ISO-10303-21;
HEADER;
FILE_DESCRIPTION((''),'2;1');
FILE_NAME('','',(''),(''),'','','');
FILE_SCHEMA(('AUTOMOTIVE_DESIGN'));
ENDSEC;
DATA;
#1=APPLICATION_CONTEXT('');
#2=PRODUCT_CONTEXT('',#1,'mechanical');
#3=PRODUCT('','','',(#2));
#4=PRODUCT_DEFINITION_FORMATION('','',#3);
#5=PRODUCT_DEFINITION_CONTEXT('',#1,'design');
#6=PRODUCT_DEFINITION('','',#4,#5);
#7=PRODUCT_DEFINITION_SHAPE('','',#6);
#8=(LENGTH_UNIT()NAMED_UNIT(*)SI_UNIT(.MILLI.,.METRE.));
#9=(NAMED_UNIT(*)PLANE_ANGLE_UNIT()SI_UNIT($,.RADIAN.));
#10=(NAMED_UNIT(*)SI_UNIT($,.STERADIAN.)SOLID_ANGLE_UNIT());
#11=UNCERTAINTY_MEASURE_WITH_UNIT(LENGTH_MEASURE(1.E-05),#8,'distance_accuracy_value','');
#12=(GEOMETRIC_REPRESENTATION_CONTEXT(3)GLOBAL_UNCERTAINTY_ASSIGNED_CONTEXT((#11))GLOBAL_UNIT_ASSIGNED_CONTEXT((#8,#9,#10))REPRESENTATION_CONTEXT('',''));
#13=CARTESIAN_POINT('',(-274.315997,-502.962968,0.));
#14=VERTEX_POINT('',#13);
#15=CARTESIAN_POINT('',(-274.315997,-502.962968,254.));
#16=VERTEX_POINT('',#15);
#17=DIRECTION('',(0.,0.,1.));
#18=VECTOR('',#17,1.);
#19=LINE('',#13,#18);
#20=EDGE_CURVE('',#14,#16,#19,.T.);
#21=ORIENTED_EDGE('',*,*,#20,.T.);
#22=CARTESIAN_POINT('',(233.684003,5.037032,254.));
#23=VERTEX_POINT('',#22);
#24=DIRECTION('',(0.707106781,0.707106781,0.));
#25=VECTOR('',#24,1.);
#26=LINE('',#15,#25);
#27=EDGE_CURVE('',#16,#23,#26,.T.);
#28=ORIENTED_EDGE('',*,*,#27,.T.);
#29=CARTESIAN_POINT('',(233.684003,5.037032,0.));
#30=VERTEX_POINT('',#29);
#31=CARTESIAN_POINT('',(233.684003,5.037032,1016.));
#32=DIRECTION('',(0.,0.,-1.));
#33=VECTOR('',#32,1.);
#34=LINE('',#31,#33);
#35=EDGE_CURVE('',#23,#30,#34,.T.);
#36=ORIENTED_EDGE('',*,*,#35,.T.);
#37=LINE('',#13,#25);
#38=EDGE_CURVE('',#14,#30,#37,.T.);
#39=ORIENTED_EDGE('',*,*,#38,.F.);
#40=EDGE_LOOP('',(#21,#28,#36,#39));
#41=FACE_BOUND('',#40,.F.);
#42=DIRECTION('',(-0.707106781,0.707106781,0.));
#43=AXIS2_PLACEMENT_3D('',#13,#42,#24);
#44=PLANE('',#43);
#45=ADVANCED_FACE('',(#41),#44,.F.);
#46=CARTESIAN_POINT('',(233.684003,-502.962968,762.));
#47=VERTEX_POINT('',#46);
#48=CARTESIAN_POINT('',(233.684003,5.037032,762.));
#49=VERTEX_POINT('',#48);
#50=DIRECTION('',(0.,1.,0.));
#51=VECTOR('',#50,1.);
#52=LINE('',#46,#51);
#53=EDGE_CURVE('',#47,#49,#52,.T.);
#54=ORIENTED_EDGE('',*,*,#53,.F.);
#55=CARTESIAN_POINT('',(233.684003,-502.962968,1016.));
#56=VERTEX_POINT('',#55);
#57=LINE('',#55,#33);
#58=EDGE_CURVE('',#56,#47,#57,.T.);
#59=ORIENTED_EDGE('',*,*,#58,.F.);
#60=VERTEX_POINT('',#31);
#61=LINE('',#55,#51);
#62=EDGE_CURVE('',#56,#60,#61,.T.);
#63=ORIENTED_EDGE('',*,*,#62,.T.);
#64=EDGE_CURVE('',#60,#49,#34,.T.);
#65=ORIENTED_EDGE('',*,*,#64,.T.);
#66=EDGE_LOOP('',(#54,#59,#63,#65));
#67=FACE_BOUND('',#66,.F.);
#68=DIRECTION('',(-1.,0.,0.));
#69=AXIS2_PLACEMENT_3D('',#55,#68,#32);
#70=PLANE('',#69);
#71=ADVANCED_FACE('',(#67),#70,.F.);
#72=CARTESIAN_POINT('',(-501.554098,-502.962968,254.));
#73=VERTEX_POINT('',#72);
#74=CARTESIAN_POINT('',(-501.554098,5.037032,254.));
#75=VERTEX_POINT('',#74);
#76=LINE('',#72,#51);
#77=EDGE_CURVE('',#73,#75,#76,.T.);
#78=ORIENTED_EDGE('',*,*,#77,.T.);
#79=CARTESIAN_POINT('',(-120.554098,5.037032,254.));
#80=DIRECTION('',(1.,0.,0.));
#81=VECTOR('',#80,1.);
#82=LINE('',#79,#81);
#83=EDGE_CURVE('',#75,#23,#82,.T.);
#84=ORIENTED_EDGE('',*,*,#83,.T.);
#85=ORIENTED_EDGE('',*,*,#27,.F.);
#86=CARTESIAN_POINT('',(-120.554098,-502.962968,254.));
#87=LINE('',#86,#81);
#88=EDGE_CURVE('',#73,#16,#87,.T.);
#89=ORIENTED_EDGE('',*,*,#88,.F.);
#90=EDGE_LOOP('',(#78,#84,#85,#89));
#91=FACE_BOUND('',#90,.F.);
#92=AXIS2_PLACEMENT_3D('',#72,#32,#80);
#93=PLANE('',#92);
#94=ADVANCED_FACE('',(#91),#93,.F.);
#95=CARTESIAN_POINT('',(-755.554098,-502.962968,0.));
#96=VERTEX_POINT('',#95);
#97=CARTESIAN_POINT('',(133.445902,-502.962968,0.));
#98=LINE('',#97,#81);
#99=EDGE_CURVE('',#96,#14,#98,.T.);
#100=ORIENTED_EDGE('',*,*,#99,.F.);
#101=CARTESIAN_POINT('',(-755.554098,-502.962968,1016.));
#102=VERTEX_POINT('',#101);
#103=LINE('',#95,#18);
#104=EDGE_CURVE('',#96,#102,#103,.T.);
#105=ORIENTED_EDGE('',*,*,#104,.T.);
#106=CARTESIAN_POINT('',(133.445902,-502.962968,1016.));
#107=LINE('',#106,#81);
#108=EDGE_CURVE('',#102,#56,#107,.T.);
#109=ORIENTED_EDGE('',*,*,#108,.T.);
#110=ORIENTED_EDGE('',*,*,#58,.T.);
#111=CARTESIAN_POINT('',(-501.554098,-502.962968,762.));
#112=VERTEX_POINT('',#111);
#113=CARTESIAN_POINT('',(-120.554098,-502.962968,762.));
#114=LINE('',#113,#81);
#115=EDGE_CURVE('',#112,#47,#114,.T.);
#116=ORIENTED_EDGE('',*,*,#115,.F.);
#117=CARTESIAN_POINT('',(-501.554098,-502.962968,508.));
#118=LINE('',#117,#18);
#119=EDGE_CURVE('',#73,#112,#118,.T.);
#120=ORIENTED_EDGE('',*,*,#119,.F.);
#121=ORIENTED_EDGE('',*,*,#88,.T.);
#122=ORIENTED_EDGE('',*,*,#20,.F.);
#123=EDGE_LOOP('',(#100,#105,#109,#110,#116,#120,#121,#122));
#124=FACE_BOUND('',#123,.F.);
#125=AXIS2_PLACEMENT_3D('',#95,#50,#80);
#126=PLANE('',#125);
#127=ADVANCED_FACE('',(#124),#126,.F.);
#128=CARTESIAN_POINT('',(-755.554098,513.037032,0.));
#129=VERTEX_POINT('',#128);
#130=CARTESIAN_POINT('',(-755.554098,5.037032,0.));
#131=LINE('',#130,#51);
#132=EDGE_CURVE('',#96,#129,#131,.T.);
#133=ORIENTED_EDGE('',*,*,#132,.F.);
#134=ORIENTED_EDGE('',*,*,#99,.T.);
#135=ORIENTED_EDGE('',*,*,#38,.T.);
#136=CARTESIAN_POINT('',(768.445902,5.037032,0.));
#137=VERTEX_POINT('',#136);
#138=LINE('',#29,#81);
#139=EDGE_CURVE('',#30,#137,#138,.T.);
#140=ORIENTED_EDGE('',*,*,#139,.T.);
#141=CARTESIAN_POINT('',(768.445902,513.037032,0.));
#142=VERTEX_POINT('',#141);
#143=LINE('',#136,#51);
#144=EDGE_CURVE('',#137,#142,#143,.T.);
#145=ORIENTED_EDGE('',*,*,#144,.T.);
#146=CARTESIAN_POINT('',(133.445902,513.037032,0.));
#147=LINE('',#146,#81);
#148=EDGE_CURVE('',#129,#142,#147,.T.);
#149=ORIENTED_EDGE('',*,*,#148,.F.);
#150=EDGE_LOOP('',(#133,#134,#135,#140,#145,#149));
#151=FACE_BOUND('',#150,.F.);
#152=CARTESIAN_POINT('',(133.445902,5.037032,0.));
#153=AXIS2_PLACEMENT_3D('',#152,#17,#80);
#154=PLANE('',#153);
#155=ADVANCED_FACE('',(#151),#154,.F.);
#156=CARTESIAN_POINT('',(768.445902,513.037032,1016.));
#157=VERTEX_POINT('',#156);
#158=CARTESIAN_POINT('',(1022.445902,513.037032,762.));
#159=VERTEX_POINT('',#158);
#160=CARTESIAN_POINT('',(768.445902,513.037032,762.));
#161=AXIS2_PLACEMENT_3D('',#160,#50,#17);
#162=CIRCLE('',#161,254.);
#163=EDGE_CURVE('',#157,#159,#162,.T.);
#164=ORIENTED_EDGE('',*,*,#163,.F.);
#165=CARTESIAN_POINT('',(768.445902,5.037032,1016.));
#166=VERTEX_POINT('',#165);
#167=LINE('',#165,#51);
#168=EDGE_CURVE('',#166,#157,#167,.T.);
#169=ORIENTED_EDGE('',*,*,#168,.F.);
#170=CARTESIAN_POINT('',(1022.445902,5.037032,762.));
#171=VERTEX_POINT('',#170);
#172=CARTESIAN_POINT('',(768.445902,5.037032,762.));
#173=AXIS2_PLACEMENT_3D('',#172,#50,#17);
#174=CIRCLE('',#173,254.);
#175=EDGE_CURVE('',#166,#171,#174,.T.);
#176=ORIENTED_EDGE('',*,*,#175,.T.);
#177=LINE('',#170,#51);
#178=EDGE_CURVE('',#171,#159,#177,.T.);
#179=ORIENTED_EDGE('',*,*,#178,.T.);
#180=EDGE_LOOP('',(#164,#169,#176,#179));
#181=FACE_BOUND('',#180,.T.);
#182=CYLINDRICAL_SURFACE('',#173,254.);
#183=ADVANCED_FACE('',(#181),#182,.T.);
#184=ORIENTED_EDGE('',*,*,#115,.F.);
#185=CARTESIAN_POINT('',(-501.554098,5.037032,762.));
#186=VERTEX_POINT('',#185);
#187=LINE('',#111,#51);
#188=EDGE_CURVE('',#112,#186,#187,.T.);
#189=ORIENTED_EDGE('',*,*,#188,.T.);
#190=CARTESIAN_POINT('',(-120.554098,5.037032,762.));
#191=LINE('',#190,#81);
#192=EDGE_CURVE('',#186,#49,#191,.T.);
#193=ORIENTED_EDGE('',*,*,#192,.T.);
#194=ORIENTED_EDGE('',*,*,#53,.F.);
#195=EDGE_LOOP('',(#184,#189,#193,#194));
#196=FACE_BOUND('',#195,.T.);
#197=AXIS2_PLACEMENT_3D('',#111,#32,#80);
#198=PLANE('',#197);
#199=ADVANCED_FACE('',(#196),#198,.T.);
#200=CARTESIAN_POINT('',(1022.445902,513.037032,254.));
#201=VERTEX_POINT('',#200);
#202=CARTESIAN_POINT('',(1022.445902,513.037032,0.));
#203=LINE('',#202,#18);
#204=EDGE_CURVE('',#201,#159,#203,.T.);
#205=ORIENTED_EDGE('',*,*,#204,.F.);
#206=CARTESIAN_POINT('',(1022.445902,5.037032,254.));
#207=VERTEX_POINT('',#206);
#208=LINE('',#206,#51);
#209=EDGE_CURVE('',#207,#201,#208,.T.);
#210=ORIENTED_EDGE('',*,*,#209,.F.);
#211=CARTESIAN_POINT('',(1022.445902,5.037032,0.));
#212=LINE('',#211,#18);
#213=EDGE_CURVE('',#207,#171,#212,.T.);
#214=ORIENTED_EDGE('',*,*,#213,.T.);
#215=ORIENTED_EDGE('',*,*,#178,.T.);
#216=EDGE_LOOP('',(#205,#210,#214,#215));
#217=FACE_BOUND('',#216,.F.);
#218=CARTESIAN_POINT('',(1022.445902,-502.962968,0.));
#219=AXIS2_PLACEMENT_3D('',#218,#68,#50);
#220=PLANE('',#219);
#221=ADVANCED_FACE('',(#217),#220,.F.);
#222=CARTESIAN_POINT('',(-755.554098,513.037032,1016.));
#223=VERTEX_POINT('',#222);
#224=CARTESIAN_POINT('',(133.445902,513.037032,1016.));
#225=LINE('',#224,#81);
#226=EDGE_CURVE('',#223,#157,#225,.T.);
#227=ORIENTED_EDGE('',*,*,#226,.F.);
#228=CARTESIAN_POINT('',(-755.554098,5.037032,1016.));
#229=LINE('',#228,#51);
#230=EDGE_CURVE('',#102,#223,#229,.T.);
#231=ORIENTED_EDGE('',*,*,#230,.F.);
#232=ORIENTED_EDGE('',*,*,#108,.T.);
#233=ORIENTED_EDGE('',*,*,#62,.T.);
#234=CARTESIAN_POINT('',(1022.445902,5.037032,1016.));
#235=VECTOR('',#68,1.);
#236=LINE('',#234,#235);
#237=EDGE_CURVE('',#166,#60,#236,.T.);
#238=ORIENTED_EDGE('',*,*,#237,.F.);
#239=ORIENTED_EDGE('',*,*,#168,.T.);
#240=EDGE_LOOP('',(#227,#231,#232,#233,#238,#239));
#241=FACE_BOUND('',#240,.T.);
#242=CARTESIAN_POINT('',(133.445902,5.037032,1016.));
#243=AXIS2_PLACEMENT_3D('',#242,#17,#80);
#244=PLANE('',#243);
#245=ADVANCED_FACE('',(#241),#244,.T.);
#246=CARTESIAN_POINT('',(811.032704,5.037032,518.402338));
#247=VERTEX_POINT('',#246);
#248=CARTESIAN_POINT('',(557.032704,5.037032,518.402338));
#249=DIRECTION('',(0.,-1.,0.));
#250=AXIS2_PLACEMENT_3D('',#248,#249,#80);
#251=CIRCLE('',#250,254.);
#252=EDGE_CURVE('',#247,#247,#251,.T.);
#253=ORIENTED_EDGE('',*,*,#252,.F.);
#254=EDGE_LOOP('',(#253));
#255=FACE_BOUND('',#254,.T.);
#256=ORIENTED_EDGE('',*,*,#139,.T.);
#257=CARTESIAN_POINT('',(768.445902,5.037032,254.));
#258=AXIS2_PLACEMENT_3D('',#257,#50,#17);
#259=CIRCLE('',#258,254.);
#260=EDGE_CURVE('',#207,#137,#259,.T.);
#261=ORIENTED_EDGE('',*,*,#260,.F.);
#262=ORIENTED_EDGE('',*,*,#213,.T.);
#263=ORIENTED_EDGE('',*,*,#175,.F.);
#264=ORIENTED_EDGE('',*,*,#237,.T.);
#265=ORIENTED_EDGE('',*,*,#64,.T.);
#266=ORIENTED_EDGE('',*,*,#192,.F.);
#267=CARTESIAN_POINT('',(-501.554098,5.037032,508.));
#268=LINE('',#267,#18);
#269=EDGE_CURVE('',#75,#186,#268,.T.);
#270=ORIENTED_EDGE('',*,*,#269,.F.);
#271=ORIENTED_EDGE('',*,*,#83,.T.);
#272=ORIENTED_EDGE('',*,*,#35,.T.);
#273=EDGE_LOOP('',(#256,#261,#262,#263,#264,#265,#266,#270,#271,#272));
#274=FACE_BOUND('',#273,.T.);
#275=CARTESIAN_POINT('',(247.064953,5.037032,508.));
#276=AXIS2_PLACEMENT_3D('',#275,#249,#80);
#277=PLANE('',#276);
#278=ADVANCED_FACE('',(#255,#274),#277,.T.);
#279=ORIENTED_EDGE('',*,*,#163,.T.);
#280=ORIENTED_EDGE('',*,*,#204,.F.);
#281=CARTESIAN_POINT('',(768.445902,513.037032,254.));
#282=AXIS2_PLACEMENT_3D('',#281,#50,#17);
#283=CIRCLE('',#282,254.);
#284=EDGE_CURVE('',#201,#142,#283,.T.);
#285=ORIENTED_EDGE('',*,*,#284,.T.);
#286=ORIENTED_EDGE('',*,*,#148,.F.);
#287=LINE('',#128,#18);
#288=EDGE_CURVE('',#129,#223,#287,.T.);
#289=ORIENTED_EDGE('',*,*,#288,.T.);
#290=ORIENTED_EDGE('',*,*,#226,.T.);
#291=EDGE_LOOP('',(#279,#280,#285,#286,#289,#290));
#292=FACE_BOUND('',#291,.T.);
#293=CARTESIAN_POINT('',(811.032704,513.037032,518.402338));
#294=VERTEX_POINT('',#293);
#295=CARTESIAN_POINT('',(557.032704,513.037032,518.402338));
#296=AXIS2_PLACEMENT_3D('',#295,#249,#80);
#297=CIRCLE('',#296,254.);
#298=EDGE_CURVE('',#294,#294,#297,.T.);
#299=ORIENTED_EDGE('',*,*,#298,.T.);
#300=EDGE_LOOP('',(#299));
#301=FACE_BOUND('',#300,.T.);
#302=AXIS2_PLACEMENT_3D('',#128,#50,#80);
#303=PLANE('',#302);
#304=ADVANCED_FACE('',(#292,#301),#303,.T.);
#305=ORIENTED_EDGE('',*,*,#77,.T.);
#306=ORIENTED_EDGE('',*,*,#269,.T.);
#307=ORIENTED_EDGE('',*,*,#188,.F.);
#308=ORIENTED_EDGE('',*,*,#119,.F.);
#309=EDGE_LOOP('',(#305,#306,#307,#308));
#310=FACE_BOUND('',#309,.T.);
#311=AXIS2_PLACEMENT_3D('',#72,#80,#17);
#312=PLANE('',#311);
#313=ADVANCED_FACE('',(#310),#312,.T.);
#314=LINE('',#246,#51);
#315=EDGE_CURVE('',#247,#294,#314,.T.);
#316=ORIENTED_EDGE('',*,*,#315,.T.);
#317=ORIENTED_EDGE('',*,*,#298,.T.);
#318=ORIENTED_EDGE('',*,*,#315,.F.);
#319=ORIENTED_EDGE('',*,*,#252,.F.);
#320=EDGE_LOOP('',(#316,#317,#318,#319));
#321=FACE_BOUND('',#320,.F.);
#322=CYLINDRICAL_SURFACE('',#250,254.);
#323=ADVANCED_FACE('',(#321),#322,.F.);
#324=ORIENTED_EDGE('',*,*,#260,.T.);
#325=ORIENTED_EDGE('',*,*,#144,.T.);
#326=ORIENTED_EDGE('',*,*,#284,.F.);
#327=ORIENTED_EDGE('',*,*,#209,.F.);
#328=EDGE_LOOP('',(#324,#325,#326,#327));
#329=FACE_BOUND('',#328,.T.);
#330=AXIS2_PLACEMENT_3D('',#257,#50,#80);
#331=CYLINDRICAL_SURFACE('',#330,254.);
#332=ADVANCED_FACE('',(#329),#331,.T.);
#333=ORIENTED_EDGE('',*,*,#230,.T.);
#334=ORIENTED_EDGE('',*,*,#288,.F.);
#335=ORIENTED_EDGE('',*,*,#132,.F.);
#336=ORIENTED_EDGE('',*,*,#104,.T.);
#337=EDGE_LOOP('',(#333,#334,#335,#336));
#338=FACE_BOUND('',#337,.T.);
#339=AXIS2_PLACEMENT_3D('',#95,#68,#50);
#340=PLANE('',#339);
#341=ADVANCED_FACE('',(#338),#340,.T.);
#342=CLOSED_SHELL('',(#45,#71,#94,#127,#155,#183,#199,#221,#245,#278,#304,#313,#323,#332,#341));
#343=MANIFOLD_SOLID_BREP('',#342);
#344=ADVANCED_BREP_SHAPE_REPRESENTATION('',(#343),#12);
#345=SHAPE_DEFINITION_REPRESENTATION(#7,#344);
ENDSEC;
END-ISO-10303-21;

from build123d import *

# Parameters (mm, degrees)
F0_W      = 1778
F0_H      = 1016
F1_DEPTH  = 1016
F2_W      = 762
F2_H      = 508
F3_DEPTH  = 508
F4_W      = 26.7618985716
F4_H      = 508
F5_DEPTH  = 508
F6_R      = 254
F7_R      = 254
F8_R      = 254
F9_DEPTH  = 508
F11_DEPTH = 254


with BuildPart() as f1:
    # F0 (on Top) → F1 (new body)
    with BuildSketch(Plane.XY):
        with Locations((133.4459019247, 5.0370320678)):
            Rectangle(F0_W, F0_H)
    extrude(amount=F1_DEPTH)

    # F2 (on face) → F3 (cut)
    with BuildSketch(Plane.XZ.offset(502.9629679322)):
        with Locations((-120.5540980753, 508)):
            Rectangle(F2_W, F2_H)
    extrude(amount=-F3_DEPTH, mode=Mode.SUBTRACT)

    # F4 (on face) → F5 (cut)
    with BuildSketch(Plane.XZ.offset(502.9629679322)):
        with Locations((247.0649526389, 508)):
            Rectangle(F4_W, F4_H)
        Polygon((1022.4459019247, 1016), (233.6840033531, 1016), (233.6840033531, 762), (260.4459019247, 762), (260.4459019247, 254), (233.6840033531, 254), (233.6840033531, 0), (1022.4459019247, 0), align=None)
    extrude(amount=-F5_DEPTH, mode=Mode.SUBTRACT)

    # F6
    f6_edges = [f1.edges().sort_by_distance(p)[0] for p in [
        (1022.445902, 259.037032, 1016),
    ]]
    fillet(f6_edges, radius=F6_R)

    # F7
    f7_edges = [f1.edges().sort_by_distance(p)[0] for p in [
        (1022.445902, 259.037032, 0),
    ]]
    fillet(f7_edges, radius=F7_R)

    # F8 (on face) → F9 (cut)
    with BuildSketch(Plane.XZ.offset(-5.0370320678)):
        with Locations((557.0327043533, 518.402338028)):
            Circle(F8_R)
    extrude(amount=-F9_DEPTH, mode=Mode.SUBTRACT)

    # F10 (on face) → F11 (cut)
    with BuildSketch(Plane(origin=(0, 0, 0), x_dir=(1, 0, 0), z_dir=(0, 0, -1))):
        Polygon((233.6840033531, -5.0370320678), (233.6840033531, 502.9629679322), (-274.3159966469, 502.9629679322), align=None)
    extrude(amount=-F11_DEPTH, mode=Mode.SUBTRACT)


solid = f1.part
